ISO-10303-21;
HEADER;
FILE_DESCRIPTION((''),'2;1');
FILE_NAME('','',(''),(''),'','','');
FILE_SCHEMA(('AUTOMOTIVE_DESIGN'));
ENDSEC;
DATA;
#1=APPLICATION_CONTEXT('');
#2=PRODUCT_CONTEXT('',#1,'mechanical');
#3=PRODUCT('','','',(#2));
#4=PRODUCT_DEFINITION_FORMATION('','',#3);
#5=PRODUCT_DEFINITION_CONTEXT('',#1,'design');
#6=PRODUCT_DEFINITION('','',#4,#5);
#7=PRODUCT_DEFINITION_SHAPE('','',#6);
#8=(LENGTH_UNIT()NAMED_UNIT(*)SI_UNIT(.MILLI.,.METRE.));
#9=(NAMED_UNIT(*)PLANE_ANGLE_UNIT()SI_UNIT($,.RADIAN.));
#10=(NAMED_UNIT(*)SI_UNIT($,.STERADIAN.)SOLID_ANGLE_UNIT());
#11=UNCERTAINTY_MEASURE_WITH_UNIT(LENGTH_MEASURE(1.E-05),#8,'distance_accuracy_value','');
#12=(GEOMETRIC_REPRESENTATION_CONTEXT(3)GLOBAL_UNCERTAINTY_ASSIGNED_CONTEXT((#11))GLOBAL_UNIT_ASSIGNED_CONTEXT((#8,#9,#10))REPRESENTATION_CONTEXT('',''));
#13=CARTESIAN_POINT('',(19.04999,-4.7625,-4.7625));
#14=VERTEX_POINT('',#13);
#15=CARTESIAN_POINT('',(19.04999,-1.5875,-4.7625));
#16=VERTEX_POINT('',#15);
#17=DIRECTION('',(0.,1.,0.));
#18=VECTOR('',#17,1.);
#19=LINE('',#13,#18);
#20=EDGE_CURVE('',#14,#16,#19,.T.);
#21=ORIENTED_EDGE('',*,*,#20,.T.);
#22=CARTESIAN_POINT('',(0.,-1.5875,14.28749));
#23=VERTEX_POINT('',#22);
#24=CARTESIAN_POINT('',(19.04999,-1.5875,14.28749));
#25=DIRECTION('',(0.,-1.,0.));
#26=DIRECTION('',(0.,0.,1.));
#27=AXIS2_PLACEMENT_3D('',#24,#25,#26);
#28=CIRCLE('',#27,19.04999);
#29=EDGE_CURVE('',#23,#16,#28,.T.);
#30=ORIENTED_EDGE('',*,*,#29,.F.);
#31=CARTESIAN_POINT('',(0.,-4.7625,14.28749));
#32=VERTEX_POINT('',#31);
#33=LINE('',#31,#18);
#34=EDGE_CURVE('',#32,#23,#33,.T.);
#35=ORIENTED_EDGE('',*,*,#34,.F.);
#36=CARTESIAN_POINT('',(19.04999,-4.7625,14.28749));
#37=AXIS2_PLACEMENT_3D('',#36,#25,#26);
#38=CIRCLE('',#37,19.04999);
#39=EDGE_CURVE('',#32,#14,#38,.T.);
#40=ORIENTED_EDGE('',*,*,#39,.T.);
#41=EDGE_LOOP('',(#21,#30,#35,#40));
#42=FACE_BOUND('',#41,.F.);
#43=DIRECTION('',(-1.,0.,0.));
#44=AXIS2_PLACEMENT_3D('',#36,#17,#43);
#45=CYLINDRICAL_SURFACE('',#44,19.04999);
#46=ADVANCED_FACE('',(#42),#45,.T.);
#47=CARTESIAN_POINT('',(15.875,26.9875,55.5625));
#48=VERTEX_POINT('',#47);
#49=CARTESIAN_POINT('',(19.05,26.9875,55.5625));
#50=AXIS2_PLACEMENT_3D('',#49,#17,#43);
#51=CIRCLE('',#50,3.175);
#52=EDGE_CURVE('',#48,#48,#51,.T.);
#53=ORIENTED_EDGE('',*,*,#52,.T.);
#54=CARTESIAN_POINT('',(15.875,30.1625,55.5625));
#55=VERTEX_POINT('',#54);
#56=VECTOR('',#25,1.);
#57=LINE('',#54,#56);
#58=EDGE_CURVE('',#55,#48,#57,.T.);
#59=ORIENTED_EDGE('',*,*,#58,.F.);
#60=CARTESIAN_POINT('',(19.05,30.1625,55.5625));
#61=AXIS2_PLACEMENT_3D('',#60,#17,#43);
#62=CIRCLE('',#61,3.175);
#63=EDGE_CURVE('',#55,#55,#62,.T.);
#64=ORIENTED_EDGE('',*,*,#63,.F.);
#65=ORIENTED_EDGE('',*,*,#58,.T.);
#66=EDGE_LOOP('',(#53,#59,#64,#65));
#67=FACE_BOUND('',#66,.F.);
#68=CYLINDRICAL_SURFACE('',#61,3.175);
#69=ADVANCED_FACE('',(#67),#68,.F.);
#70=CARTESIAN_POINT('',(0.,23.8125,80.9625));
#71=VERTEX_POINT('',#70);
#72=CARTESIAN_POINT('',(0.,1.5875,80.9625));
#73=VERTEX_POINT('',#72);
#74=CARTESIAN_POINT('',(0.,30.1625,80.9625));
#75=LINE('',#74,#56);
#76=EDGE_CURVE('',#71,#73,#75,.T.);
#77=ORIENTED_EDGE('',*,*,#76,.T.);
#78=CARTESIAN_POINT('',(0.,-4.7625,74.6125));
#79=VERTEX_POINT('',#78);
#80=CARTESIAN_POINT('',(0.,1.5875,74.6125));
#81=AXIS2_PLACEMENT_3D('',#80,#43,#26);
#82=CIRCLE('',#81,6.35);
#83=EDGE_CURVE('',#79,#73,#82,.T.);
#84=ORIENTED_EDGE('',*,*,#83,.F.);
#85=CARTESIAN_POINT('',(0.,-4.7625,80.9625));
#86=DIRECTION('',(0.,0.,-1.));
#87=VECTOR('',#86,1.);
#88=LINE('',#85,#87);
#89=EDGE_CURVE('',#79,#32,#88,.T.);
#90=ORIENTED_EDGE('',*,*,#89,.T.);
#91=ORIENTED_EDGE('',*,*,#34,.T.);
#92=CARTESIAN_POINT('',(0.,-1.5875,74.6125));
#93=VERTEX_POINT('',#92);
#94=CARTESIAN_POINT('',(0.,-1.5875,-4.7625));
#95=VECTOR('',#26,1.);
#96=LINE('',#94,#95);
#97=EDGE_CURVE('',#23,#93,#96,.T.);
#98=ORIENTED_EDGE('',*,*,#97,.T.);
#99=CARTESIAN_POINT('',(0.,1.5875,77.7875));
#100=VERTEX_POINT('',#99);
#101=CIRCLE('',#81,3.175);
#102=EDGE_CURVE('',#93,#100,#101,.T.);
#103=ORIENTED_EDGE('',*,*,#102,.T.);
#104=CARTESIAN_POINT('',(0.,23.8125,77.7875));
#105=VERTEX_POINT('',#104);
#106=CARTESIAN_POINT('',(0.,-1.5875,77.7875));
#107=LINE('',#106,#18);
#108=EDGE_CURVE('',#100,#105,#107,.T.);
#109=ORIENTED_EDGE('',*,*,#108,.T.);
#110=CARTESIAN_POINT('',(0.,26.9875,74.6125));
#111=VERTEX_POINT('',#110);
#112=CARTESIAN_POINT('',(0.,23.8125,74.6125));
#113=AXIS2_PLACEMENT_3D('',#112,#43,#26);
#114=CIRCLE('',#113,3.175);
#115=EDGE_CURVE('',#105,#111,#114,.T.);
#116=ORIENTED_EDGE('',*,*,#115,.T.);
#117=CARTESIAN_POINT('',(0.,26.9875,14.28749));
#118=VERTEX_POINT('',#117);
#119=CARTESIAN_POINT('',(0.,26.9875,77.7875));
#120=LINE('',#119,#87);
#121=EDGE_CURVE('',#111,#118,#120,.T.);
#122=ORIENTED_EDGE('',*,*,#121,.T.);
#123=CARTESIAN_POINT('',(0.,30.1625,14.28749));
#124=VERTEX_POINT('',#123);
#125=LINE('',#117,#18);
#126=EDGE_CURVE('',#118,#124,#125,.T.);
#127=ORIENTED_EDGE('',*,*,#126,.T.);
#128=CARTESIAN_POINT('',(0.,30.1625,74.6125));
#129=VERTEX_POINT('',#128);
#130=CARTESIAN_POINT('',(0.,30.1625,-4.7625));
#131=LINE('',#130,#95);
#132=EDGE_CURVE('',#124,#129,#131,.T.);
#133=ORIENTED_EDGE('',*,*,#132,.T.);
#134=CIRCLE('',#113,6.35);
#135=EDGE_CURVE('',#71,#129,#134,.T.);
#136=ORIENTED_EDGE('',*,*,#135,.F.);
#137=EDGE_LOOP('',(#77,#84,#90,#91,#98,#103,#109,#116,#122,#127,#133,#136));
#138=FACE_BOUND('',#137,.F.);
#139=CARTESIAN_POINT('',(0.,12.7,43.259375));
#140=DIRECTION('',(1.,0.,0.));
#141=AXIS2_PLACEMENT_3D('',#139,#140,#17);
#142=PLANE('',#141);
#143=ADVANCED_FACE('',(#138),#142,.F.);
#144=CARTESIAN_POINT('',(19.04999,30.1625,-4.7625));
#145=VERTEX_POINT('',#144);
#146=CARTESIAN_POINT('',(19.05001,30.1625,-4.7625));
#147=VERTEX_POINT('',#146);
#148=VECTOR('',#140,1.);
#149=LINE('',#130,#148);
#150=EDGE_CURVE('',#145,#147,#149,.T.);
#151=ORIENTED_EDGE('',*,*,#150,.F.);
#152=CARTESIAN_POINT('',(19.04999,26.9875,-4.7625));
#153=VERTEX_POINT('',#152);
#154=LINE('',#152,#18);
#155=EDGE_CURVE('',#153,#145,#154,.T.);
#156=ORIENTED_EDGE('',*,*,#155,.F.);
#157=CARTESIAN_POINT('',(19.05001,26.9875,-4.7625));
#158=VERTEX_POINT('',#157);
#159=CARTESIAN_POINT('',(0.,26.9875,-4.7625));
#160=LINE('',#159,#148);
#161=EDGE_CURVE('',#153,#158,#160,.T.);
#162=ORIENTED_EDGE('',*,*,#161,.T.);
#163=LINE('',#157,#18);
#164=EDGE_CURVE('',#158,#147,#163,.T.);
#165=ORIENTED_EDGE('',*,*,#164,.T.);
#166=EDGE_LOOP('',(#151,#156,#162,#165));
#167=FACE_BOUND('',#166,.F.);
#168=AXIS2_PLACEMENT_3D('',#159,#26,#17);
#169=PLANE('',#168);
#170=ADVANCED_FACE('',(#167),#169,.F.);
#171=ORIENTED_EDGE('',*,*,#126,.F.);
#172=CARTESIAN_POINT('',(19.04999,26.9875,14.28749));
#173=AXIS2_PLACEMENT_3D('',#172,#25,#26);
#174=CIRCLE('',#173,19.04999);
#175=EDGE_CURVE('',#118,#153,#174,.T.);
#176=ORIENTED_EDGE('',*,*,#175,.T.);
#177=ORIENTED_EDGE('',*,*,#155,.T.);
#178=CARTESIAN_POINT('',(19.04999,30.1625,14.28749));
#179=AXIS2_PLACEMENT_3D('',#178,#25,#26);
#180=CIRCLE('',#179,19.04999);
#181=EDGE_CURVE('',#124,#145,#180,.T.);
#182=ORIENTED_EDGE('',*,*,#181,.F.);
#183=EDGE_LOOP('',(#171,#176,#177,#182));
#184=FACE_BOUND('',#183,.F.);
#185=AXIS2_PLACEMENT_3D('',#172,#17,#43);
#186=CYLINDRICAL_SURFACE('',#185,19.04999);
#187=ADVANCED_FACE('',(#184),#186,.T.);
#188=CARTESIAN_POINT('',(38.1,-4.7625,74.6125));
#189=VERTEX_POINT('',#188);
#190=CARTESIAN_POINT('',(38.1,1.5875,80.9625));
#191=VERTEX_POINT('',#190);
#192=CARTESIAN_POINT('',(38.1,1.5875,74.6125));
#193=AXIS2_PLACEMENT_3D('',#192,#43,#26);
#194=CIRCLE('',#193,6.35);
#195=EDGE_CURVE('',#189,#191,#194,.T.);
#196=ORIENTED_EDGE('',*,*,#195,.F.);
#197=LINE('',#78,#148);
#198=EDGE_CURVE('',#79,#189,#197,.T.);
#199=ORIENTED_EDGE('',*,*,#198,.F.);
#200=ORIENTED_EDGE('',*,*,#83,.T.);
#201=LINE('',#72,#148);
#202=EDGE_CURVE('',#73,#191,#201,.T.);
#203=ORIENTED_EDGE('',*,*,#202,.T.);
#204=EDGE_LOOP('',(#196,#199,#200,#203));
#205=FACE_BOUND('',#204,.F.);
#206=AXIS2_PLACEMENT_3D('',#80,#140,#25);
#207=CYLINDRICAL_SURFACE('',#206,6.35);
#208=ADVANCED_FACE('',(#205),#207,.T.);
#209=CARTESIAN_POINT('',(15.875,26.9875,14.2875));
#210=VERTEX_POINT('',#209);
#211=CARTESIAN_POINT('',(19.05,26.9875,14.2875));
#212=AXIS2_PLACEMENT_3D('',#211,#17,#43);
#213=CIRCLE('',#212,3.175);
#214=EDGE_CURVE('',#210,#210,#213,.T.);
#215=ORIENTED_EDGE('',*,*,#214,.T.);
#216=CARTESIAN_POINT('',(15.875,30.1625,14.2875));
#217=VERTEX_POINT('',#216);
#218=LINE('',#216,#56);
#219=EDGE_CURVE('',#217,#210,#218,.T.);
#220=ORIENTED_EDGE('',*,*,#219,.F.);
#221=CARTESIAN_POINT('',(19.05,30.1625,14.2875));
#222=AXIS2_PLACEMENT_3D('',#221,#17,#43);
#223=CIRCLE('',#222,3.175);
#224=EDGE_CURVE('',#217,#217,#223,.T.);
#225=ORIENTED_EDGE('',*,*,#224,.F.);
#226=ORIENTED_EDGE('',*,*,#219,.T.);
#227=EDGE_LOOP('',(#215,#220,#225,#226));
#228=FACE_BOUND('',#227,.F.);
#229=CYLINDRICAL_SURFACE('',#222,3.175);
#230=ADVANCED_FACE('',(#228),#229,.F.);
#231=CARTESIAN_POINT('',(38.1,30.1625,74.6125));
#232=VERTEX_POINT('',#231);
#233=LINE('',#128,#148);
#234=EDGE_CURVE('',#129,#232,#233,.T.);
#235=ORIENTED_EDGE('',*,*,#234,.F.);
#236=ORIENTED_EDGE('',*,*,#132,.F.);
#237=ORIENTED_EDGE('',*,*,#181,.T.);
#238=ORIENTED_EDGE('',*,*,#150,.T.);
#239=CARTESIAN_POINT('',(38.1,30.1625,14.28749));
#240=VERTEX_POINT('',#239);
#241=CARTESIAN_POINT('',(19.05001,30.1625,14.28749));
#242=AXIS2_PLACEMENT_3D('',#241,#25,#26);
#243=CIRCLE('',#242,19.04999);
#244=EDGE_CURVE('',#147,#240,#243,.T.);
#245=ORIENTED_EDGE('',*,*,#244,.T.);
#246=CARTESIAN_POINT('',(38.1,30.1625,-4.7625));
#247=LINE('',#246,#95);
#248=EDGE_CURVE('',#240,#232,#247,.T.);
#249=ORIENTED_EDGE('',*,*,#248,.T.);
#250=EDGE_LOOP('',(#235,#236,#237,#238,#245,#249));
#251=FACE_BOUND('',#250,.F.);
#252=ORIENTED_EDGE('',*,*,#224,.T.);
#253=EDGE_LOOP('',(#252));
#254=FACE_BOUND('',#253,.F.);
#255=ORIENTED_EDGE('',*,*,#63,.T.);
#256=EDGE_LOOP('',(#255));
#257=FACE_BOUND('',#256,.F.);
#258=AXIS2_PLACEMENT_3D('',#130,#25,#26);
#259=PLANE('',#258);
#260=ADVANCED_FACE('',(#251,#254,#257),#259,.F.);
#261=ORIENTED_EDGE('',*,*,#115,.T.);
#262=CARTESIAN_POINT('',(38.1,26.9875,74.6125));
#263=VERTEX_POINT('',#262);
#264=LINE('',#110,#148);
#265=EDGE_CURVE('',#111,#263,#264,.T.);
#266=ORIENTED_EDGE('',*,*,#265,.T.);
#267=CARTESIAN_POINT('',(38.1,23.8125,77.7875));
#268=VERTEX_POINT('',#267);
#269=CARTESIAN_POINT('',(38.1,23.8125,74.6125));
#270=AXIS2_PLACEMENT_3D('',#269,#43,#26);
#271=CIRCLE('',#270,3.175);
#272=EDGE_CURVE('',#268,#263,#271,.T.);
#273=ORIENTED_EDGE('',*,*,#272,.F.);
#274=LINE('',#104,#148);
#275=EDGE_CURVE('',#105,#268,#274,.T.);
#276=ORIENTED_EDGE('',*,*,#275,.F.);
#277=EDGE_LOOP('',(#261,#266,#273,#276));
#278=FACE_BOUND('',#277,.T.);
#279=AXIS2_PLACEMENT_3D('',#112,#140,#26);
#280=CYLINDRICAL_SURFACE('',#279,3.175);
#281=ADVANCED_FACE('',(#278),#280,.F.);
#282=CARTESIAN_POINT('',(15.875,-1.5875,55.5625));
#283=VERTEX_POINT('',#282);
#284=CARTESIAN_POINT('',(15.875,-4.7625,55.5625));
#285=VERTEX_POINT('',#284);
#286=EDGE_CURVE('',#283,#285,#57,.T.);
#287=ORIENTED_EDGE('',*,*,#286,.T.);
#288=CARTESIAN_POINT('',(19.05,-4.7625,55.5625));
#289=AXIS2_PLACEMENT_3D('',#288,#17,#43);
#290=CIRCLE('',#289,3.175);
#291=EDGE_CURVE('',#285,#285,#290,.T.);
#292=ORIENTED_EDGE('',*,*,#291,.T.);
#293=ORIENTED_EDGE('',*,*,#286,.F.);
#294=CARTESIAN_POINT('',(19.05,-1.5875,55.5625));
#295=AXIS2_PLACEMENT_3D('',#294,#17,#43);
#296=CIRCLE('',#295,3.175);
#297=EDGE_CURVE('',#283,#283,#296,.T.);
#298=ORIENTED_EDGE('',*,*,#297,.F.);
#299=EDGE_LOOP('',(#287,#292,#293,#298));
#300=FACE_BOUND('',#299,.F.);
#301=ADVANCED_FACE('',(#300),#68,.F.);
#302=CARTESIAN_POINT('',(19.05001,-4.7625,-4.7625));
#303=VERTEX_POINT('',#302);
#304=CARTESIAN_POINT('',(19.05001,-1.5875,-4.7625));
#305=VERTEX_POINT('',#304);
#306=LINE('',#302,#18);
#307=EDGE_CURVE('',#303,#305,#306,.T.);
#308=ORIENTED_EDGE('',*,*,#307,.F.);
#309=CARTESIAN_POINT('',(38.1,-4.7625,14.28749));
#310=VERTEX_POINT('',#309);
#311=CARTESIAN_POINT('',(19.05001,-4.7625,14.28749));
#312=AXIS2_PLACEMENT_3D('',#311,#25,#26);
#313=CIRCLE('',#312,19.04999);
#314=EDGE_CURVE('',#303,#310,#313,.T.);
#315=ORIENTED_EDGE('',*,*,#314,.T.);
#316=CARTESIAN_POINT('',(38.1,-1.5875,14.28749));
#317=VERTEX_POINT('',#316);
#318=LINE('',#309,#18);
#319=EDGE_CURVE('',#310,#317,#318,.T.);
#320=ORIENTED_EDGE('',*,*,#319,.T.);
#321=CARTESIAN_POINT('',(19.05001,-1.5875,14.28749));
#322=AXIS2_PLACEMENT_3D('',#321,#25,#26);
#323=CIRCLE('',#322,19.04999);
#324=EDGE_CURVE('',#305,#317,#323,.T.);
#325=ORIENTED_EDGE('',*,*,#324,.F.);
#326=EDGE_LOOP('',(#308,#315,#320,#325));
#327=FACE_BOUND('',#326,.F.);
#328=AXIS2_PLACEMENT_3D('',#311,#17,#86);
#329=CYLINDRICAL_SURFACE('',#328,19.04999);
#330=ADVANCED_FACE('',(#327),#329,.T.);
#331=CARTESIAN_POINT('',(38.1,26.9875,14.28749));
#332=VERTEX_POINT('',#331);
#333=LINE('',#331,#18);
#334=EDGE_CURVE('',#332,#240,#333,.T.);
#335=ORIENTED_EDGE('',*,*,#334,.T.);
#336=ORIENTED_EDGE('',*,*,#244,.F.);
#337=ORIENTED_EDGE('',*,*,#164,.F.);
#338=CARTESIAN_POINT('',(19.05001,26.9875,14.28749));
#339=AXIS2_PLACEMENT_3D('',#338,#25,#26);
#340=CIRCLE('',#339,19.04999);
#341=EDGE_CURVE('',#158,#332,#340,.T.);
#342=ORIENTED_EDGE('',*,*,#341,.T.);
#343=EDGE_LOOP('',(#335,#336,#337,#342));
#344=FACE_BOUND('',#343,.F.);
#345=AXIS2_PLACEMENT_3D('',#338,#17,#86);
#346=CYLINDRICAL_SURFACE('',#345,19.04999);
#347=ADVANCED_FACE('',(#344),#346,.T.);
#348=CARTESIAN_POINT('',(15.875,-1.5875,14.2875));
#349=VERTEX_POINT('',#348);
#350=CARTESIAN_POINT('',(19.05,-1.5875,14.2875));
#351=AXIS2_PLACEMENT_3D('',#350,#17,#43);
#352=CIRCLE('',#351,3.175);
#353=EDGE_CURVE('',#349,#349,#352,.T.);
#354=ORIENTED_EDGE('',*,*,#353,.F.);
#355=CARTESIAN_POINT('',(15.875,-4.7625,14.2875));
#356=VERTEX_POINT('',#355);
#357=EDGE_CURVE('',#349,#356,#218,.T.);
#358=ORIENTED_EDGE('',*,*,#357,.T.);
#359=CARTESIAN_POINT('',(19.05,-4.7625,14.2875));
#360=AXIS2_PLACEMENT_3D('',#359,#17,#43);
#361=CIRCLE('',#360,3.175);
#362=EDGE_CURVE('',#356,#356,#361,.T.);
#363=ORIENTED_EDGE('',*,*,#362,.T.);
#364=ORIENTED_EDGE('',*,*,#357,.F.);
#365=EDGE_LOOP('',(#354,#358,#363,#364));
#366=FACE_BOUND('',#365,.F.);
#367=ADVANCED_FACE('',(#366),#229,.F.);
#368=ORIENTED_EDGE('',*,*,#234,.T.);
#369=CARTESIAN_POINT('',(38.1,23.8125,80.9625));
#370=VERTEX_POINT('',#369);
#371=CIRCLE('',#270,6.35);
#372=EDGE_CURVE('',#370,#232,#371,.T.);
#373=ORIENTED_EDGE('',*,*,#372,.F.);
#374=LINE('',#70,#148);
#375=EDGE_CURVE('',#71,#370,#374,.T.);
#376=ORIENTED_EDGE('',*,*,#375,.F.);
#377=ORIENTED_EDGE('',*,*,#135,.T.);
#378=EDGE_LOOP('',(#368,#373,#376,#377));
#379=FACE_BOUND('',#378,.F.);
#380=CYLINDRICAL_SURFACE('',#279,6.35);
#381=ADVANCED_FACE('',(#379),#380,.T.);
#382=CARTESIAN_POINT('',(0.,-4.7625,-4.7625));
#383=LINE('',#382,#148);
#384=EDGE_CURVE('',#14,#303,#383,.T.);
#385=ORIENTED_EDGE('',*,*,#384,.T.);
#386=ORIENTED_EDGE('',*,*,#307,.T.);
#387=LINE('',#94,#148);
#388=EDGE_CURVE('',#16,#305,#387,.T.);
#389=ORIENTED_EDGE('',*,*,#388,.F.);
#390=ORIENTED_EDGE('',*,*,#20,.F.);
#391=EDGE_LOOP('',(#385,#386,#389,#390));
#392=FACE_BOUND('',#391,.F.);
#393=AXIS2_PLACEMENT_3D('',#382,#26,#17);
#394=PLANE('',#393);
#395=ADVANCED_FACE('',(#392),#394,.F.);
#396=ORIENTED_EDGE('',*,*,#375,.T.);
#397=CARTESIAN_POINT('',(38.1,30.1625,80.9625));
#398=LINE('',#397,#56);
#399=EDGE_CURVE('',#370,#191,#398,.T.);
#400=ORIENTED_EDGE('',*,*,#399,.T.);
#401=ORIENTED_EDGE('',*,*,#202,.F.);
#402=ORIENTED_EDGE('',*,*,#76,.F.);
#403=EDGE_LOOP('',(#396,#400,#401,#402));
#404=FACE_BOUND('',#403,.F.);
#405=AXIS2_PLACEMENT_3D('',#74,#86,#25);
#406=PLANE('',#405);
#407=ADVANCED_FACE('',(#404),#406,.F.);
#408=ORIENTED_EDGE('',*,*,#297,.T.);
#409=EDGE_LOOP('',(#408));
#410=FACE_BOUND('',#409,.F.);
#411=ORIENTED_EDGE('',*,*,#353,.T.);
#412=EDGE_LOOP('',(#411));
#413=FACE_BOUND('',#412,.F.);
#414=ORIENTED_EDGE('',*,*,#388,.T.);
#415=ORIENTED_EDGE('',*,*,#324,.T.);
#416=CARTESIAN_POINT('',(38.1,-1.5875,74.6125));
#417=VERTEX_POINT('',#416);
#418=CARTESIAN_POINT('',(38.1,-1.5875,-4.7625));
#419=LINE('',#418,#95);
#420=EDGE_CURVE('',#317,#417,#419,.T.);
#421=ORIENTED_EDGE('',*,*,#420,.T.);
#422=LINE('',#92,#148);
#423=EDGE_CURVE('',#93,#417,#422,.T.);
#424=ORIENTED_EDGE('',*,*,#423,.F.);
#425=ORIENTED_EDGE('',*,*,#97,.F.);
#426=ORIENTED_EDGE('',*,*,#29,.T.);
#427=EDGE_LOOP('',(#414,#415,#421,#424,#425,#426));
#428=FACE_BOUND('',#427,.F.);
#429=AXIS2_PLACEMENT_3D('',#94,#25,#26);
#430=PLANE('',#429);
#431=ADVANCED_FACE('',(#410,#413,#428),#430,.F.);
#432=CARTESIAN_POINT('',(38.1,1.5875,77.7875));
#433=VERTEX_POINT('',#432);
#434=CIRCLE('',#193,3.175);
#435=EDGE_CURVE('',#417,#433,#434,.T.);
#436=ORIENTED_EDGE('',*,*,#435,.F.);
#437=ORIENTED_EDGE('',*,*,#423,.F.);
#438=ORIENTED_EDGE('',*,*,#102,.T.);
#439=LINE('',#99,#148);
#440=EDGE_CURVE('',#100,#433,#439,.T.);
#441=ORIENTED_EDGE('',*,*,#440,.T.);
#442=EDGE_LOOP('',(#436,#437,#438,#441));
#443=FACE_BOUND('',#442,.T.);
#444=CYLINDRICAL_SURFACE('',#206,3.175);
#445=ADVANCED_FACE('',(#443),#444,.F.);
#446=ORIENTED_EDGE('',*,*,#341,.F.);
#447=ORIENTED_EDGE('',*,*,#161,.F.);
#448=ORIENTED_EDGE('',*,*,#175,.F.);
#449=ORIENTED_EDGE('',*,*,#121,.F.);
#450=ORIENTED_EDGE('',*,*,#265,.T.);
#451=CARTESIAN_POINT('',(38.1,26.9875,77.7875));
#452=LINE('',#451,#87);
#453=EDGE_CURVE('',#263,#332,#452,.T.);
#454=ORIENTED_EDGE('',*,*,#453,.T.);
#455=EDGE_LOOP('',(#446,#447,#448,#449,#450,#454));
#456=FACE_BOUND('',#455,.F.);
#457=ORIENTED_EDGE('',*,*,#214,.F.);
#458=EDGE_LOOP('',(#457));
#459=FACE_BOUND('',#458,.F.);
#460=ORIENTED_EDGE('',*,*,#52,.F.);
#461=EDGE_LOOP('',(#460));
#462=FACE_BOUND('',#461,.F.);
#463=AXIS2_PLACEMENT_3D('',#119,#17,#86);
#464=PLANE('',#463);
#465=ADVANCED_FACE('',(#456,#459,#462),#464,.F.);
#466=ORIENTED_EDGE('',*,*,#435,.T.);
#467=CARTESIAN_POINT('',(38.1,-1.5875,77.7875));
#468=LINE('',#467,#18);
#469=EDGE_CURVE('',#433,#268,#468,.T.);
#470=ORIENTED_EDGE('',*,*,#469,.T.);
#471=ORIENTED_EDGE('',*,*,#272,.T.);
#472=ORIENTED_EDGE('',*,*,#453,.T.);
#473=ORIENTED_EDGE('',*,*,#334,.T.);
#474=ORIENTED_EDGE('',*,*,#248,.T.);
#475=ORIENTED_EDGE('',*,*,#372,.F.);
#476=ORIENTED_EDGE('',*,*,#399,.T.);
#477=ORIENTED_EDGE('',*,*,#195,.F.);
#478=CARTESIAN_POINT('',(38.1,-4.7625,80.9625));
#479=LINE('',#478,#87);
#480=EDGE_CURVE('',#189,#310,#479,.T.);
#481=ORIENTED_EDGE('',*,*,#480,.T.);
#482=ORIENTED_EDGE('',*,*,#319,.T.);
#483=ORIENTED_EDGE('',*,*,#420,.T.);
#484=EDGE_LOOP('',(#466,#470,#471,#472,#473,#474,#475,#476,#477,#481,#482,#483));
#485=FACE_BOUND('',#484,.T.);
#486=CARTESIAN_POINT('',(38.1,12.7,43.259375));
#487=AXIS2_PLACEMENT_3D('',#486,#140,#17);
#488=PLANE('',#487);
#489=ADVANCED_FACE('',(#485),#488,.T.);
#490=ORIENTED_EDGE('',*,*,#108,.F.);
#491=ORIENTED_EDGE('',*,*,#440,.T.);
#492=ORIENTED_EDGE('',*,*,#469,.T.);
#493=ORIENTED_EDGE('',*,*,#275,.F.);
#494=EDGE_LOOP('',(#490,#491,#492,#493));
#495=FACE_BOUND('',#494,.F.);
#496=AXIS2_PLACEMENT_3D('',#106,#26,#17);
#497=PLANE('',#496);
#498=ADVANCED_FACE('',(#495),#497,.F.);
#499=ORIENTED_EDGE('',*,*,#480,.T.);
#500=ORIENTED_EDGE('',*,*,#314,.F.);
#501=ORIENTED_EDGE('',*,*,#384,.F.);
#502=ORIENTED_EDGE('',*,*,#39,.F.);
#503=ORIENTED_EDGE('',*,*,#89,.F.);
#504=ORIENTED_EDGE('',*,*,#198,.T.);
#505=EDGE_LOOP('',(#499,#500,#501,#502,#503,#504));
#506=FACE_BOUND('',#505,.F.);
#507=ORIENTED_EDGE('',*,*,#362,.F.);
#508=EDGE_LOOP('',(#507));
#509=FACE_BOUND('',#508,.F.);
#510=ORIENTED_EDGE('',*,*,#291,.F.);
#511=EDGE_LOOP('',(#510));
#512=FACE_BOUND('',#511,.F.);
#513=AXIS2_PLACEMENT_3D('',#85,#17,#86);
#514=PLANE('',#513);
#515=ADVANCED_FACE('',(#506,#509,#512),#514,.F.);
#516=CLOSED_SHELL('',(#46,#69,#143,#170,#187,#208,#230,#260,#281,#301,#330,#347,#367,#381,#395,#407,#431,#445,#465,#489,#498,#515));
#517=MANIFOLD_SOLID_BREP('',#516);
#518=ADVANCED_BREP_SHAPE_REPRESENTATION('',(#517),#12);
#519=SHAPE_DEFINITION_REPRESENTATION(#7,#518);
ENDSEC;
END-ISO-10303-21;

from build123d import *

# Parameters (mm, degrees)
F1_DEPTH = 38.1
F2_R     = 3.175
F3_R     = 6.35
F4_R     = 19.04999
F5_R     = 3.175
F6_DEPTH = 34.926


# Not quite as in the source:
# - a fillet or chamfer is up to 0.001 mm smaller than in the source, because OpenCascade refuses the exact size


with BuildPart() as f1:
    # F0 (on Right) → F1 (new body)
    with BuildSketch(Plane.YZ):
        Polygon((-1.5875, -4.7625), (-1.5875, 77.7875), (26.9875, 77.7875), (26.9875, -4.7625), (30.1625, -4.7625), (30.1625, 80.9625), (-4.7625, 80.9625), (-4.7625, -4.7625), align=None)
    extrude(amount=F1_DEPTH)

    # F2
    f2_edges = [f1.edges().sort_by_distance(p)[0] for p in [
        (19.05, 26.9875, 77.7875),
        (19.05, -1.5875, 77.7875),
    ]]
    fillet(f2_edges, radius=F2_R)

    # F3
    f3_edges = [f1.edges().sort_by_distance(p)[0] for p in [
        (19.05, 30.1625, 80.9625),
        (19.05, -4.7625, 80.9625),
    ]]
    fillet(f3_edges, radius=F3_R)

    # F4 (radius 19.05 in the source; OpenCascade refuses exactly that, so slightly less here)
    f4_edges = [f1.edges().sort_by_distance(p)[0] for p in [
        (38.1, 28.575, -4.7625),
        (0, 28.575, -4.7625),
        (38.1, -3.175, -4.7625),
        (0, -3.175, -4.7625),
    ]]
    fillet(f4_edges, radius=F4_R)

    # F5 (on face) → F6 (cut, through all)
    with BuildSketch(Plane(origin=(0, 30.1625, 0), x_dir=(-1, 0, 0), z_dir=(0, 1, 0))):
        with Locations((-19.05, 14.2875)):
            Circle(F5_R)
        with Locations((-19.05, 55.5625)):
            Circle(F5_R)
    extrude(amount=-F6_DEPTH, mode=Mode.SUBTRACT)


solid = f1.part
